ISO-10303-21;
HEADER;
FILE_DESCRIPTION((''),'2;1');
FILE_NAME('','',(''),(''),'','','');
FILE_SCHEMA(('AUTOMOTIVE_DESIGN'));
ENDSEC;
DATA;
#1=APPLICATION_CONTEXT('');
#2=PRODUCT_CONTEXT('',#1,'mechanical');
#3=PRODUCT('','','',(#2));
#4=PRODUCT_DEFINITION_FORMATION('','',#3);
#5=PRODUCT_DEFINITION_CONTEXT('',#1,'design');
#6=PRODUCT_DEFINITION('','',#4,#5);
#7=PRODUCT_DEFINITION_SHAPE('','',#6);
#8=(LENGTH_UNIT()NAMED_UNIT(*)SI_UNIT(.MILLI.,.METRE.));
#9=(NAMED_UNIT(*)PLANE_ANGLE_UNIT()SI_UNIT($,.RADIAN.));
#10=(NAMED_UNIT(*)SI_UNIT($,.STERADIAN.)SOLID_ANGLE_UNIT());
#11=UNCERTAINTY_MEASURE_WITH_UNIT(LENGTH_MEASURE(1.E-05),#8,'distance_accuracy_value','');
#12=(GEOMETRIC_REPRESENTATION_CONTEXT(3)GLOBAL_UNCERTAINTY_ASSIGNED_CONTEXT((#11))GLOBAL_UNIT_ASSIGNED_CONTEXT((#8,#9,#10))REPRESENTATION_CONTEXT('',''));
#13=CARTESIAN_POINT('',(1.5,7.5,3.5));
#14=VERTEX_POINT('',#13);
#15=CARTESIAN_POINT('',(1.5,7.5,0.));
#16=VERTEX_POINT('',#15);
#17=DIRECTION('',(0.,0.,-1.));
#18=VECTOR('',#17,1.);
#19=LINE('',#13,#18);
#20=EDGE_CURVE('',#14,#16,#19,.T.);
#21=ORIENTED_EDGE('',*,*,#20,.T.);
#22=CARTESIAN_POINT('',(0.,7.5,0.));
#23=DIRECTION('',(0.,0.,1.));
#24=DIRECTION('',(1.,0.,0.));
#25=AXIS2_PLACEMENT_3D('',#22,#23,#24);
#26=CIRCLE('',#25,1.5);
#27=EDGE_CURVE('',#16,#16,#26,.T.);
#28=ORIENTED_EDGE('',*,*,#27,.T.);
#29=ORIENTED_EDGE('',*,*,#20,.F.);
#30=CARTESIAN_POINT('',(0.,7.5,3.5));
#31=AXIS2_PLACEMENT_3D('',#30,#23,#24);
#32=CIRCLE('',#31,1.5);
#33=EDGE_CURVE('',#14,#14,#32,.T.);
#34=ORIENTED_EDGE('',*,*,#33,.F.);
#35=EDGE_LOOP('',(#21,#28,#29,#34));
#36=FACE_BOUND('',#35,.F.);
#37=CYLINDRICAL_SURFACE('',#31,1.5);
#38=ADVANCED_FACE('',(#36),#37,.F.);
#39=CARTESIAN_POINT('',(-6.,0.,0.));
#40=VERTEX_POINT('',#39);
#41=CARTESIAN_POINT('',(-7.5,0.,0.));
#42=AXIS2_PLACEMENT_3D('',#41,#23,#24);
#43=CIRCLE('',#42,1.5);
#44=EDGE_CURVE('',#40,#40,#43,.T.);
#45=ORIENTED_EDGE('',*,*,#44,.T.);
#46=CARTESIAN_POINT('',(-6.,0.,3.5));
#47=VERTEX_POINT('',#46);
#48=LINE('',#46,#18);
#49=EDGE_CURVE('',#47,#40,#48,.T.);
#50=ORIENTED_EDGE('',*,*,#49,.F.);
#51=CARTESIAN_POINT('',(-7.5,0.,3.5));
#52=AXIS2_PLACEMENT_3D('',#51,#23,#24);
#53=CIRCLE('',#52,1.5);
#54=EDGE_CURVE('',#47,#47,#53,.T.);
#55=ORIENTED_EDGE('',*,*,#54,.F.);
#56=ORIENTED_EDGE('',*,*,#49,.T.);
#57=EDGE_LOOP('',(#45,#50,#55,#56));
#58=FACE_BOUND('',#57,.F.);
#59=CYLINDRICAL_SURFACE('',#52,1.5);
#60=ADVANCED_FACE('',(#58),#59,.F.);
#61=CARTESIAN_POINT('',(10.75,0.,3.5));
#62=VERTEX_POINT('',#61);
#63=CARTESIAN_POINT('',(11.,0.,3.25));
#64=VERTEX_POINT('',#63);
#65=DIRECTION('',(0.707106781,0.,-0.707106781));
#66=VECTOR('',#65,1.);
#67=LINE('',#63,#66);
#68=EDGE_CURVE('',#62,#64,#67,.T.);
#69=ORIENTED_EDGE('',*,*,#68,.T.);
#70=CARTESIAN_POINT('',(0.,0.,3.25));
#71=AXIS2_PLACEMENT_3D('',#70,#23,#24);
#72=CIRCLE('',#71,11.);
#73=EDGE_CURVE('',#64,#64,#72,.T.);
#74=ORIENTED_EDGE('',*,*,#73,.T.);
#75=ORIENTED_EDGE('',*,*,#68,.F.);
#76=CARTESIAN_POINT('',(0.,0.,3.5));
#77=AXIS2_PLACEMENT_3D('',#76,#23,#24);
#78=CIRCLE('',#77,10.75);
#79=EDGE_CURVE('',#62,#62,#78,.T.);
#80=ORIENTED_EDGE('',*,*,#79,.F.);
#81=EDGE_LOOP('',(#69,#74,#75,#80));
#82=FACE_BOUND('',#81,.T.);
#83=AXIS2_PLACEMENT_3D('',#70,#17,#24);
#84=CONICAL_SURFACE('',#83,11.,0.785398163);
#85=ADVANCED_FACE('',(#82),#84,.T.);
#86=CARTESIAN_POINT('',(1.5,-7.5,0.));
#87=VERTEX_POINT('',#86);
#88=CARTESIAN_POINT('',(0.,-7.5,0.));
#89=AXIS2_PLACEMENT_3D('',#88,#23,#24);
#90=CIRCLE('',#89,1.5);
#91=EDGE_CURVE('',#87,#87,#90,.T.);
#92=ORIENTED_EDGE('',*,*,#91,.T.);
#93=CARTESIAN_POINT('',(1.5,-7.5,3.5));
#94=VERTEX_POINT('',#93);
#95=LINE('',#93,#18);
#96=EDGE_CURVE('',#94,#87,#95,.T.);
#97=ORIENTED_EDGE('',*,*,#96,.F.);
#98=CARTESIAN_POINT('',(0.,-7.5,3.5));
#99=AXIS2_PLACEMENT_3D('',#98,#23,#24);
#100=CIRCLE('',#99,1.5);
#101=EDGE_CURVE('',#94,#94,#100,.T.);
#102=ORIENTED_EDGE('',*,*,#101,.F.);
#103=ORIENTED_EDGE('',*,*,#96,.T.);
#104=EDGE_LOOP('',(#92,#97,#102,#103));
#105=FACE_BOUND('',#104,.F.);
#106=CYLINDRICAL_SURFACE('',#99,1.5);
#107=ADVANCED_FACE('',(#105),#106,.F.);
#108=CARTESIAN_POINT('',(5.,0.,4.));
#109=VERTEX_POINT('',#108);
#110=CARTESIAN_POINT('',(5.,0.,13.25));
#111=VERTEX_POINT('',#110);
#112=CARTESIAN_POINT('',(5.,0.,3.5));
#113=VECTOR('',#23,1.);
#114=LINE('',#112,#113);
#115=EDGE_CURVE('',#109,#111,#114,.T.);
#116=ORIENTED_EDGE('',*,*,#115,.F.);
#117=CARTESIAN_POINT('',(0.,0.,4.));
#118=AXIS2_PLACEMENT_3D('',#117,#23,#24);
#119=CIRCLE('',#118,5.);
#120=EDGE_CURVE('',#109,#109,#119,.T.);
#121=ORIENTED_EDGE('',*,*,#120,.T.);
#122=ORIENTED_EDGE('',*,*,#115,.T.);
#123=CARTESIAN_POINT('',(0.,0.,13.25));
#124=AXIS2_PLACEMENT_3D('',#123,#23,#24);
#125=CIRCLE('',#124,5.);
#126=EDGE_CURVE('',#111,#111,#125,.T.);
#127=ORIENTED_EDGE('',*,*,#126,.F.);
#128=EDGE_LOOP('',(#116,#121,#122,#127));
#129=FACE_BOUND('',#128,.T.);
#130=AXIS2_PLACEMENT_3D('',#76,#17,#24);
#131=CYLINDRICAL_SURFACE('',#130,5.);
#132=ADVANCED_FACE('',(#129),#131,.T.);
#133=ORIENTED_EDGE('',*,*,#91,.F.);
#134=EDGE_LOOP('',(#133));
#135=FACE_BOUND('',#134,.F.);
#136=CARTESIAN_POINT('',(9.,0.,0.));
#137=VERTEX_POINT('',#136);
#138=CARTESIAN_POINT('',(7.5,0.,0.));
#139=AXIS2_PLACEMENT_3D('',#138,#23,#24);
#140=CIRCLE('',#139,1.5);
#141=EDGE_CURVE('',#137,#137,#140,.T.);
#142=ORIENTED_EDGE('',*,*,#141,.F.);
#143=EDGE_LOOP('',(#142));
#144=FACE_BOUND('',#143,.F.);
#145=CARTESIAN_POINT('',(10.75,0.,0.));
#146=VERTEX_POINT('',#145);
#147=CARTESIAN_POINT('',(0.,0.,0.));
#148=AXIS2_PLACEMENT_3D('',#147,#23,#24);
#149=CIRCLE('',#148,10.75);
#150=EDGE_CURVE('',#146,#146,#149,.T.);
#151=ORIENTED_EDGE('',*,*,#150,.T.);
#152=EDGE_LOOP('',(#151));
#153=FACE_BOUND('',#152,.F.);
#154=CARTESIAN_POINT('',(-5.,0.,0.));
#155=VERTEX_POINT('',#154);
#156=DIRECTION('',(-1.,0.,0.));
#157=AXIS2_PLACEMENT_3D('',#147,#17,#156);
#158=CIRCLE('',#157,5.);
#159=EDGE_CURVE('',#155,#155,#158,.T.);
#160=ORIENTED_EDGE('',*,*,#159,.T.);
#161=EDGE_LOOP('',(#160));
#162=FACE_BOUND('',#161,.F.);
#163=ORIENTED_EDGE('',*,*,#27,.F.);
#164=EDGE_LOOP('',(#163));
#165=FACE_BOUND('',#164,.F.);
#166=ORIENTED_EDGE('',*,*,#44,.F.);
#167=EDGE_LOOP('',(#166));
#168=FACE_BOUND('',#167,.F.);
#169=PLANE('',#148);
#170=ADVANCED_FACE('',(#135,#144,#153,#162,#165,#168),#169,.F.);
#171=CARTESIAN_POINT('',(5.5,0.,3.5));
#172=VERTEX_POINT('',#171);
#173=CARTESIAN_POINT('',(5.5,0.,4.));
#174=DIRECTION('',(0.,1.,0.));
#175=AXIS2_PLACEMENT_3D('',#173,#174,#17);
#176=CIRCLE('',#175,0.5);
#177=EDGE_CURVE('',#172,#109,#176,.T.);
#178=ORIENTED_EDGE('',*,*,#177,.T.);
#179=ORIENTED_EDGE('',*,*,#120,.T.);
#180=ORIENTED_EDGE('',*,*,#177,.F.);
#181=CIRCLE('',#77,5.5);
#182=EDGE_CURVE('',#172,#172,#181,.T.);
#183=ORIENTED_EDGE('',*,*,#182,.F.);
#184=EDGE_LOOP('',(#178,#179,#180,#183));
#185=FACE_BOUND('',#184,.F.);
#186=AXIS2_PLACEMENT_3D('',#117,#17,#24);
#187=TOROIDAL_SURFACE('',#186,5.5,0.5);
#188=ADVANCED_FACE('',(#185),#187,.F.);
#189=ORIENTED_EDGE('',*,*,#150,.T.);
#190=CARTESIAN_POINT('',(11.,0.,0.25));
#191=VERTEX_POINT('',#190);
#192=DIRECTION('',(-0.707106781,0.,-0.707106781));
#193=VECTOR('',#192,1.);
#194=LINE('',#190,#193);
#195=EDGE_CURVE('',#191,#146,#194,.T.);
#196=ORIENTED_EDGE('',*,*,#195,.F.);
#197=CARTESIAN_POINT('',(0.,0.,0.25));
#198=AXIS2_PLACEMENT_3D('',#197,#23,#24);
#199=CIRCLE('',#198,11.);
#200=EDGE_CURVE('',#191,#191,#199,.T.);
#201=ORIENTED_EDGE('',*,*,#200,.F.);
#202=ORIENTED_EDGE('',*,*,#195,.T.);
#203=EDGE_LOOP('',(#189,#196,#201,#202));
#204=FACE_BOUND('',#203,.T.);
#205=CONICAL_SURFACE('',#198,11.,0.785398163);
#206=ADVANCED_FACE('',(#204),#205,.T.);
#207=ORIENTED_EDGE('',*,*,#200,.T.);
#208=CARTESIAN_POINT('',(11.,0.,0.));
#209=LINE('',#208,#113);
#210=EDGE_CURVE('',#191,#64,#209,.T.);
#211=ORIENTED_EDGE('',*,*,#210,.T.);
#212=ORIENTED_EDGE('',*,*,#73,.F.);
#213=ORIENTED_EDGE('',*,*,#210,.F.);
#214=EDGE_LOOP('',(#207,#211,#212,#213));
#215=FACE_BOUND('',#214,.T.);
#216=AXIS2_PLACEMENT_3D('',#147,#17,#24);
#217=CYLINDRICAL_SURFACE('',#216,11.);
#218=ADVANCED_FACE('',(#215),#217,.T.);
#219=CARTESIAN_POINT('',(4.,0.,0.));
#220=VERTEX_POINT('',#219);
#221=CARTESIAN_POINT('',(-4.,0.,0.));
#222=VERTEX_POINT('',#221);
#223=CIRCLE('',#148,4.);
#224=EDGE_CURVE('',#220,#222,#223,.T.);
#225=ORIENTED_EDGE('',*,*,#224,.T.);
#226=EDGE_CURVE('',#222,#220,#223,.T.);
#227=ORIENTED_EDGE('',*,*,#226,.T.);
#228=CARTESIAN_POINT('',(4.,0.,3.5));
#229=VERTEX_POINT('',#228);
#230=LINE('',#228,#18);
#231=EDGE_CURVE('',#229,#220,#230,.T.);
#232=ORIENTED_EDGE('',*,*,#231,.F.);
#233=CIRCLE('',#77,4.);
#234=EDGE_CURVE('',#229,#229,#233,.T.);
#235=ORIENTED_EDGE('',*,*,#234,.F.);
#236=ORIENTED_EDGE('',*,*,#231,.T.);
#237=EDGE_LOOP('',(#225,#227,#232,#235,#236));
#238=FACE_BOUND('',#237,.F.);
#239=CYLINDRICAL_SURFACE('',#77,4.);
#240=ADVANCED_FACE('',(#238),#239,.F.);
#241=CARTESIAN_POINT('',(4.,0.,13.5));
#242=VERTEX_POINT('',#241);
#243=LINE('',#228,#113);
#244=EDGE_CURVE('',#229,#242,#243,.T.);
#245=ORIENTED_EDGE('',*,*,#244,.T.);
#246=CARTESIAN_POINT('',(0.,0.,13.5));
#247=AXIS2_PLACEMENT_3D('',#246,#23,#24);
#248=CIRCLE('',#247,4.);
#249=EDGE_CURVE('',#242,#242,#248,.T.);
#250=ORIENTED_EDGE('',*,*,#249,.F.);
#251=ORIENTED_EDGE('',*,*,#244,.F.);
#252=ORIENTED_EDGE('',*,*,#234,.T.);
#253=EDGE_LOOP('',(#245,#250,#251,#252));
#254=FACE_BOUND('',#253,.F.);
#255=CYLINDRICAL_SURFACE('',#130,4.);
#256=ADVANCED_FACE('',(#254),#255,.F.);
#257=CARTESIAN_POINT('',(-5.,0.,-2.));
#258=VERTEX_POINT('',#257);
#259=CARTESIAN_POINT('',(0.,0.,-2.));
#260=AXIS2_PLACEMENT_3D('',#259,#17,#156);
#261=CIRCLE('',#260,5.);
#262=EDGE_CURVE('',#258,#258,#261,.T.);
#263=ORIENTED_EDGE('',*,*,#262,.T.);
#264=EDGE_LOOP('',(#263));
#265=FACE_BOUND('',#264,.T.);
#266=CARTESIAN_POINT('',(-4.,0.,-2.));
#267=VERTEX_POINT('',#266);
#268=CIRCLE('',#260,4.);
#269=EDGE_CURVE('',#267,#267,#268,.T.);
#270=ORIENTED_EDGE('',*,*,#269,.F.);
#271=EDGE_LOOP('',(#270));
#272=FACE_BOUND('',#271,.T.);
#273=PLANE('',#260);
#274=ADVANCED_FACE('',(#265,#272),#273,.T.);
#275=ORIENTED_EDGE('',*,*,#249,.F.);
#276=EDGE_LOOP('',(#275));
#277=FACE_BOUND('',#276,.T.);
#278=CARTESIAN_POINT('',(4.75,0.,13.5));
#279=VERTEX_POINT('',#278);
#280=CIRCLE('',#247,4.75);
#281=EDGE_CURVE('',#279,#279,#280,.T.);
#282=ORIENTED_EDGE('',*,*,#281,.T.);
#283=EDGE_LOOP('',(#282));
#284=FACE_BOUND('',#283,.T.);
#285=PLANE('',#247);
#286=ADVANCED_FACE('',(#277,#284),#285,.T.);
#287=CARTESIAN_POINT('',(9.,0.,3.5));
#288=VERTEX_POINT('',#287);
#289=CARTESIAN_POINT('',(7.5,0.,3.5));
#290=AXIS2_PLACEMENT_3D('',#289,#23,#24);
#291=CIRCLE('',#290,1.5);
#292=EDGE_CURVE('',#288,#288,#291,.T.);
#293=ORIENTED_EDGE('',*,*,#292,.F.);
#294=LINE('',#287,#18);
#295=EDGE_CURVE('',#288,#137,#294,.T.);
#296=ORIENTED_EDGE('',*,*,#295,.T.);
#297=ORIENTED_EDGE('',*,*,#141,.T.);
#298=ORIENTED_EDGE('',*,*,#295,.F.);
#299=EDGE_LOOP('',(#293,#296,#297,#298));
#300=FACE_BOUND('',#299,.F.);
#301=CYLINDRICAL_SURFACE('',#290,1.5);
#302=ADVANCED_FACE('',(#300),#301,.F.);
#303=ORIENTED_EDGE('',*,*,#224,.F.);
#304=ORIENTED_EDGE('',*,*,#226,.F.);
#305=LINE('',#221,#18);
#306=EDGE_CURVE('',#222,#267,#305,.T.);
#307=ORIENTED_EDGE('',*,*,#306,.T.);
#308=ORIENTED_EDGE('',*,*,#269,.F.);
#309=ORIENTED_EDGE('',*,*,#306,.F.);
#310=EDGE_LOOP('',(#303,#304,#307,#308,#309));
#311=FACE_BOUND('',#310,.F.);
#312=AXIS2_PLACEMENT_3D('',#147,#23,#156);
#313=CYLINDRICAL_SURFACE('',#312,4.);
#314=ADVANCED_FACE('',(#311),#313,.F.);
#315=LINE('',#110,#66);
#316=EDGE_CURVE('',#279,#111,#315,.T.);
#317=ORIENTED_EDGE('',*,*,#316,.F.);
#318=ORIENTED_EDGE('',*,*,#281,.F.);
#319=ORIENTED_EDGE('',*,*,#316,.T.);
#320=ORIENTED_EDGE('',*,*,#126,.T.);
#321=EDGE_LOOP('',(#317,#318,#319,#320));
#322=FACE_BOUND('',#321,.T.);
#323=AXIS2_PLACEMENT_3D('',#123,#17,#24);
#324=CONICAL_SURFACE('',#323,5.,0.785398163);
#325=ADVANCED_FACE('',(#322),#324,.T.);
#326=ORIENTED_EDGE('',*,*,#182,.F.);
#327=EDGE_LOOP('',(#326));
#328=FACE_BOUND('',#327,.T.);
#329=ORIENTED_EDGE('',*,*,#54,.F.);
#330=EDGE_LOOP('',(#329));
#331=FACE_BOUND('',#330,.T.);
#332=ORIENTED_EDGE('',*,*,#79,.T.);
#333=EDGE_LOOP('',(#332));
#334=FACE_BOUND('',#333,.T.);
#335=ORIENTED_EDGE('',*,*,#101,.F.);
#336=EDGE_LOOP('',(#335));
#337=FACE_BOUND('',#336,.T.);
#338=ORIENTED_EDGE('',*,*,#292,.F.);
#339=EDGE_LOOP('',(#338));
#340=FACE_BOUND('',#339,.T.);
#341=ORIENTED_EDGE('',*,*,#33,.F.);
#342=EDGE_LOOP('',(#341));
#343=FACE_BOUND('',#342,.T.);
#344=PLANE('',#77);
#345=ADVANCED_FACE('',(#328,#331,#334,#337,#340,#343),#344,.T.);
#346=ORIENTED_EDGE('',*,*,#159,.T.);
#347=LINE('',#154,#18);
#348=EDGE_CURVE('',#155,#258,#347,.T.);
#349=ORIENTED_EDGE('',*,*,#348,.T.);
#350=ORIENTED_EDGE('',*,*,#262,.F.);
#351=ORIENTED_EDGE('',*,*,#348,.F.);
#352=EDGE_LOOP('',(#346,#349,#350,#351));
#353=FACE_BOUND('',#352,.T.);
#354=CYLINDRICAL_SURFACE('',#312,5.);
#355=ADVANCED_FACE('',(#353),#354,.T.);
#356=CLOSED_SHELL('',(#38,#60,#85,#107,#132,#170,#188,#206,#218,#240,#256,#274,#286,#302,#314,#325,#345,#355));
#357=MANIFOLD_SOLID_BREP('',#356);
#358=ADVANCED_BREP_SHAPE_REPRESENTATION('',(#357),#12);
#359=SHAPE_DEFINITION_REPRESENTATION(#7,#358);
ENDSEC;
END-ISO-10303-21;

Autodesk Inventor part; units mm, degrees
ref_plane "YZ Plane" through (0, 0, 0) normal (1, 0, 0) x (0, 1, 0)
ref_plane "XZ Plane" through (0, 0, 0) normal (0, 1, 0) x (-1, 0, 0)
ref_plane "XY Plane" through (0, 0, 0) normal (0, 0, 1) x (1, 0, 0)
sketch "Sketch1" plane through (0, 0, 0) normal (0, 0, 1) x (1, 0, 0)
  circle A0 centre (0, 0) radius 11
  dimension "d0" = 22
extrude "Extrusion1" add sketch "Sketch1" along normal blind 3.5
sketch "Sketch2" plane through (0, 0, 3.5) normal (0, 0, 1) x (1, 0, 0)
  circle A0 centre (0, 0) radius 5
  circle A1 centre (0, 0) radius 4
  dimension "d3" = 10
  dimension "d4" = 8
extrude "Extrusion2" add sketch "Sketch2" along normal blind 10
sketch "Sketch3" plane through (0, 0, 3.5) normal (0, 0, 1) x (1, 0, 0)
  circle A0 centre (0, 0) radius 4
  dimension "d7" = 8
extrude "Extrusion3" cut sketch "Sketch3" against normal blind 10
sketch "Sketch4" plane through (0, 0, 0) normal (0, 0, -1) x (-1, 0, 0)
  circle A0 centre (0, 0) radius 4 projected
  circle A1 centre (0, 0) radius 5
  dimension "d10" = 10
extrude "Extrusion4" add sketch "Sketch4" along normal blind 2
fillet "Fillet1" radius 0.5 1 edges at (-5, 0, 3.5)
chamfer "Chamfer1" distance 0.25 angle 45 1 edges at (-5, 0, 13.5)
chamfer "Chamfer2" distance 0.25 angle 45 2 edges at (-11, 0, 3.5) (-11, 0, 0)
sketch "Sketch5" plane through (0, 0, 3.5) normal (0, 0, 1) x (1, 0, 0)
  circle A0 centre (0, 0) radius 11 construction
  circle A1 centre (0, 0) radius 7.5 construction
  circle A2 centre (0, 7.5) radius 1.5 construction
  circle A3 centre (0, 7.5) radius 1.5
  circle A4 centre (-7.5, 0) radius 1.5 construction
  circle A5 centre (-7.5, 0) radius 1.5
  circle A6 centre (0, -7.5) radius 1.5 construction
  circle A7 centre (0, -7.5) radius 1.5
  circle A8 centre (7.5, 0) radius 1.5 construction
  circle A9 centre (7.5, 0) radius 1.5
  dimension "d21" = 15
  dimension "d20" = 22
  dimension "d22" = 3
  dimension "d25" = 360
extrude "Extrusion5" cut sketch "Sketch5" against normal through all
thread "Thread1" size "M8x1.25" class "6H" standard "ANSI Metric M Profile" full length
properties part number "Tuerca_Tornillo de potencia"
